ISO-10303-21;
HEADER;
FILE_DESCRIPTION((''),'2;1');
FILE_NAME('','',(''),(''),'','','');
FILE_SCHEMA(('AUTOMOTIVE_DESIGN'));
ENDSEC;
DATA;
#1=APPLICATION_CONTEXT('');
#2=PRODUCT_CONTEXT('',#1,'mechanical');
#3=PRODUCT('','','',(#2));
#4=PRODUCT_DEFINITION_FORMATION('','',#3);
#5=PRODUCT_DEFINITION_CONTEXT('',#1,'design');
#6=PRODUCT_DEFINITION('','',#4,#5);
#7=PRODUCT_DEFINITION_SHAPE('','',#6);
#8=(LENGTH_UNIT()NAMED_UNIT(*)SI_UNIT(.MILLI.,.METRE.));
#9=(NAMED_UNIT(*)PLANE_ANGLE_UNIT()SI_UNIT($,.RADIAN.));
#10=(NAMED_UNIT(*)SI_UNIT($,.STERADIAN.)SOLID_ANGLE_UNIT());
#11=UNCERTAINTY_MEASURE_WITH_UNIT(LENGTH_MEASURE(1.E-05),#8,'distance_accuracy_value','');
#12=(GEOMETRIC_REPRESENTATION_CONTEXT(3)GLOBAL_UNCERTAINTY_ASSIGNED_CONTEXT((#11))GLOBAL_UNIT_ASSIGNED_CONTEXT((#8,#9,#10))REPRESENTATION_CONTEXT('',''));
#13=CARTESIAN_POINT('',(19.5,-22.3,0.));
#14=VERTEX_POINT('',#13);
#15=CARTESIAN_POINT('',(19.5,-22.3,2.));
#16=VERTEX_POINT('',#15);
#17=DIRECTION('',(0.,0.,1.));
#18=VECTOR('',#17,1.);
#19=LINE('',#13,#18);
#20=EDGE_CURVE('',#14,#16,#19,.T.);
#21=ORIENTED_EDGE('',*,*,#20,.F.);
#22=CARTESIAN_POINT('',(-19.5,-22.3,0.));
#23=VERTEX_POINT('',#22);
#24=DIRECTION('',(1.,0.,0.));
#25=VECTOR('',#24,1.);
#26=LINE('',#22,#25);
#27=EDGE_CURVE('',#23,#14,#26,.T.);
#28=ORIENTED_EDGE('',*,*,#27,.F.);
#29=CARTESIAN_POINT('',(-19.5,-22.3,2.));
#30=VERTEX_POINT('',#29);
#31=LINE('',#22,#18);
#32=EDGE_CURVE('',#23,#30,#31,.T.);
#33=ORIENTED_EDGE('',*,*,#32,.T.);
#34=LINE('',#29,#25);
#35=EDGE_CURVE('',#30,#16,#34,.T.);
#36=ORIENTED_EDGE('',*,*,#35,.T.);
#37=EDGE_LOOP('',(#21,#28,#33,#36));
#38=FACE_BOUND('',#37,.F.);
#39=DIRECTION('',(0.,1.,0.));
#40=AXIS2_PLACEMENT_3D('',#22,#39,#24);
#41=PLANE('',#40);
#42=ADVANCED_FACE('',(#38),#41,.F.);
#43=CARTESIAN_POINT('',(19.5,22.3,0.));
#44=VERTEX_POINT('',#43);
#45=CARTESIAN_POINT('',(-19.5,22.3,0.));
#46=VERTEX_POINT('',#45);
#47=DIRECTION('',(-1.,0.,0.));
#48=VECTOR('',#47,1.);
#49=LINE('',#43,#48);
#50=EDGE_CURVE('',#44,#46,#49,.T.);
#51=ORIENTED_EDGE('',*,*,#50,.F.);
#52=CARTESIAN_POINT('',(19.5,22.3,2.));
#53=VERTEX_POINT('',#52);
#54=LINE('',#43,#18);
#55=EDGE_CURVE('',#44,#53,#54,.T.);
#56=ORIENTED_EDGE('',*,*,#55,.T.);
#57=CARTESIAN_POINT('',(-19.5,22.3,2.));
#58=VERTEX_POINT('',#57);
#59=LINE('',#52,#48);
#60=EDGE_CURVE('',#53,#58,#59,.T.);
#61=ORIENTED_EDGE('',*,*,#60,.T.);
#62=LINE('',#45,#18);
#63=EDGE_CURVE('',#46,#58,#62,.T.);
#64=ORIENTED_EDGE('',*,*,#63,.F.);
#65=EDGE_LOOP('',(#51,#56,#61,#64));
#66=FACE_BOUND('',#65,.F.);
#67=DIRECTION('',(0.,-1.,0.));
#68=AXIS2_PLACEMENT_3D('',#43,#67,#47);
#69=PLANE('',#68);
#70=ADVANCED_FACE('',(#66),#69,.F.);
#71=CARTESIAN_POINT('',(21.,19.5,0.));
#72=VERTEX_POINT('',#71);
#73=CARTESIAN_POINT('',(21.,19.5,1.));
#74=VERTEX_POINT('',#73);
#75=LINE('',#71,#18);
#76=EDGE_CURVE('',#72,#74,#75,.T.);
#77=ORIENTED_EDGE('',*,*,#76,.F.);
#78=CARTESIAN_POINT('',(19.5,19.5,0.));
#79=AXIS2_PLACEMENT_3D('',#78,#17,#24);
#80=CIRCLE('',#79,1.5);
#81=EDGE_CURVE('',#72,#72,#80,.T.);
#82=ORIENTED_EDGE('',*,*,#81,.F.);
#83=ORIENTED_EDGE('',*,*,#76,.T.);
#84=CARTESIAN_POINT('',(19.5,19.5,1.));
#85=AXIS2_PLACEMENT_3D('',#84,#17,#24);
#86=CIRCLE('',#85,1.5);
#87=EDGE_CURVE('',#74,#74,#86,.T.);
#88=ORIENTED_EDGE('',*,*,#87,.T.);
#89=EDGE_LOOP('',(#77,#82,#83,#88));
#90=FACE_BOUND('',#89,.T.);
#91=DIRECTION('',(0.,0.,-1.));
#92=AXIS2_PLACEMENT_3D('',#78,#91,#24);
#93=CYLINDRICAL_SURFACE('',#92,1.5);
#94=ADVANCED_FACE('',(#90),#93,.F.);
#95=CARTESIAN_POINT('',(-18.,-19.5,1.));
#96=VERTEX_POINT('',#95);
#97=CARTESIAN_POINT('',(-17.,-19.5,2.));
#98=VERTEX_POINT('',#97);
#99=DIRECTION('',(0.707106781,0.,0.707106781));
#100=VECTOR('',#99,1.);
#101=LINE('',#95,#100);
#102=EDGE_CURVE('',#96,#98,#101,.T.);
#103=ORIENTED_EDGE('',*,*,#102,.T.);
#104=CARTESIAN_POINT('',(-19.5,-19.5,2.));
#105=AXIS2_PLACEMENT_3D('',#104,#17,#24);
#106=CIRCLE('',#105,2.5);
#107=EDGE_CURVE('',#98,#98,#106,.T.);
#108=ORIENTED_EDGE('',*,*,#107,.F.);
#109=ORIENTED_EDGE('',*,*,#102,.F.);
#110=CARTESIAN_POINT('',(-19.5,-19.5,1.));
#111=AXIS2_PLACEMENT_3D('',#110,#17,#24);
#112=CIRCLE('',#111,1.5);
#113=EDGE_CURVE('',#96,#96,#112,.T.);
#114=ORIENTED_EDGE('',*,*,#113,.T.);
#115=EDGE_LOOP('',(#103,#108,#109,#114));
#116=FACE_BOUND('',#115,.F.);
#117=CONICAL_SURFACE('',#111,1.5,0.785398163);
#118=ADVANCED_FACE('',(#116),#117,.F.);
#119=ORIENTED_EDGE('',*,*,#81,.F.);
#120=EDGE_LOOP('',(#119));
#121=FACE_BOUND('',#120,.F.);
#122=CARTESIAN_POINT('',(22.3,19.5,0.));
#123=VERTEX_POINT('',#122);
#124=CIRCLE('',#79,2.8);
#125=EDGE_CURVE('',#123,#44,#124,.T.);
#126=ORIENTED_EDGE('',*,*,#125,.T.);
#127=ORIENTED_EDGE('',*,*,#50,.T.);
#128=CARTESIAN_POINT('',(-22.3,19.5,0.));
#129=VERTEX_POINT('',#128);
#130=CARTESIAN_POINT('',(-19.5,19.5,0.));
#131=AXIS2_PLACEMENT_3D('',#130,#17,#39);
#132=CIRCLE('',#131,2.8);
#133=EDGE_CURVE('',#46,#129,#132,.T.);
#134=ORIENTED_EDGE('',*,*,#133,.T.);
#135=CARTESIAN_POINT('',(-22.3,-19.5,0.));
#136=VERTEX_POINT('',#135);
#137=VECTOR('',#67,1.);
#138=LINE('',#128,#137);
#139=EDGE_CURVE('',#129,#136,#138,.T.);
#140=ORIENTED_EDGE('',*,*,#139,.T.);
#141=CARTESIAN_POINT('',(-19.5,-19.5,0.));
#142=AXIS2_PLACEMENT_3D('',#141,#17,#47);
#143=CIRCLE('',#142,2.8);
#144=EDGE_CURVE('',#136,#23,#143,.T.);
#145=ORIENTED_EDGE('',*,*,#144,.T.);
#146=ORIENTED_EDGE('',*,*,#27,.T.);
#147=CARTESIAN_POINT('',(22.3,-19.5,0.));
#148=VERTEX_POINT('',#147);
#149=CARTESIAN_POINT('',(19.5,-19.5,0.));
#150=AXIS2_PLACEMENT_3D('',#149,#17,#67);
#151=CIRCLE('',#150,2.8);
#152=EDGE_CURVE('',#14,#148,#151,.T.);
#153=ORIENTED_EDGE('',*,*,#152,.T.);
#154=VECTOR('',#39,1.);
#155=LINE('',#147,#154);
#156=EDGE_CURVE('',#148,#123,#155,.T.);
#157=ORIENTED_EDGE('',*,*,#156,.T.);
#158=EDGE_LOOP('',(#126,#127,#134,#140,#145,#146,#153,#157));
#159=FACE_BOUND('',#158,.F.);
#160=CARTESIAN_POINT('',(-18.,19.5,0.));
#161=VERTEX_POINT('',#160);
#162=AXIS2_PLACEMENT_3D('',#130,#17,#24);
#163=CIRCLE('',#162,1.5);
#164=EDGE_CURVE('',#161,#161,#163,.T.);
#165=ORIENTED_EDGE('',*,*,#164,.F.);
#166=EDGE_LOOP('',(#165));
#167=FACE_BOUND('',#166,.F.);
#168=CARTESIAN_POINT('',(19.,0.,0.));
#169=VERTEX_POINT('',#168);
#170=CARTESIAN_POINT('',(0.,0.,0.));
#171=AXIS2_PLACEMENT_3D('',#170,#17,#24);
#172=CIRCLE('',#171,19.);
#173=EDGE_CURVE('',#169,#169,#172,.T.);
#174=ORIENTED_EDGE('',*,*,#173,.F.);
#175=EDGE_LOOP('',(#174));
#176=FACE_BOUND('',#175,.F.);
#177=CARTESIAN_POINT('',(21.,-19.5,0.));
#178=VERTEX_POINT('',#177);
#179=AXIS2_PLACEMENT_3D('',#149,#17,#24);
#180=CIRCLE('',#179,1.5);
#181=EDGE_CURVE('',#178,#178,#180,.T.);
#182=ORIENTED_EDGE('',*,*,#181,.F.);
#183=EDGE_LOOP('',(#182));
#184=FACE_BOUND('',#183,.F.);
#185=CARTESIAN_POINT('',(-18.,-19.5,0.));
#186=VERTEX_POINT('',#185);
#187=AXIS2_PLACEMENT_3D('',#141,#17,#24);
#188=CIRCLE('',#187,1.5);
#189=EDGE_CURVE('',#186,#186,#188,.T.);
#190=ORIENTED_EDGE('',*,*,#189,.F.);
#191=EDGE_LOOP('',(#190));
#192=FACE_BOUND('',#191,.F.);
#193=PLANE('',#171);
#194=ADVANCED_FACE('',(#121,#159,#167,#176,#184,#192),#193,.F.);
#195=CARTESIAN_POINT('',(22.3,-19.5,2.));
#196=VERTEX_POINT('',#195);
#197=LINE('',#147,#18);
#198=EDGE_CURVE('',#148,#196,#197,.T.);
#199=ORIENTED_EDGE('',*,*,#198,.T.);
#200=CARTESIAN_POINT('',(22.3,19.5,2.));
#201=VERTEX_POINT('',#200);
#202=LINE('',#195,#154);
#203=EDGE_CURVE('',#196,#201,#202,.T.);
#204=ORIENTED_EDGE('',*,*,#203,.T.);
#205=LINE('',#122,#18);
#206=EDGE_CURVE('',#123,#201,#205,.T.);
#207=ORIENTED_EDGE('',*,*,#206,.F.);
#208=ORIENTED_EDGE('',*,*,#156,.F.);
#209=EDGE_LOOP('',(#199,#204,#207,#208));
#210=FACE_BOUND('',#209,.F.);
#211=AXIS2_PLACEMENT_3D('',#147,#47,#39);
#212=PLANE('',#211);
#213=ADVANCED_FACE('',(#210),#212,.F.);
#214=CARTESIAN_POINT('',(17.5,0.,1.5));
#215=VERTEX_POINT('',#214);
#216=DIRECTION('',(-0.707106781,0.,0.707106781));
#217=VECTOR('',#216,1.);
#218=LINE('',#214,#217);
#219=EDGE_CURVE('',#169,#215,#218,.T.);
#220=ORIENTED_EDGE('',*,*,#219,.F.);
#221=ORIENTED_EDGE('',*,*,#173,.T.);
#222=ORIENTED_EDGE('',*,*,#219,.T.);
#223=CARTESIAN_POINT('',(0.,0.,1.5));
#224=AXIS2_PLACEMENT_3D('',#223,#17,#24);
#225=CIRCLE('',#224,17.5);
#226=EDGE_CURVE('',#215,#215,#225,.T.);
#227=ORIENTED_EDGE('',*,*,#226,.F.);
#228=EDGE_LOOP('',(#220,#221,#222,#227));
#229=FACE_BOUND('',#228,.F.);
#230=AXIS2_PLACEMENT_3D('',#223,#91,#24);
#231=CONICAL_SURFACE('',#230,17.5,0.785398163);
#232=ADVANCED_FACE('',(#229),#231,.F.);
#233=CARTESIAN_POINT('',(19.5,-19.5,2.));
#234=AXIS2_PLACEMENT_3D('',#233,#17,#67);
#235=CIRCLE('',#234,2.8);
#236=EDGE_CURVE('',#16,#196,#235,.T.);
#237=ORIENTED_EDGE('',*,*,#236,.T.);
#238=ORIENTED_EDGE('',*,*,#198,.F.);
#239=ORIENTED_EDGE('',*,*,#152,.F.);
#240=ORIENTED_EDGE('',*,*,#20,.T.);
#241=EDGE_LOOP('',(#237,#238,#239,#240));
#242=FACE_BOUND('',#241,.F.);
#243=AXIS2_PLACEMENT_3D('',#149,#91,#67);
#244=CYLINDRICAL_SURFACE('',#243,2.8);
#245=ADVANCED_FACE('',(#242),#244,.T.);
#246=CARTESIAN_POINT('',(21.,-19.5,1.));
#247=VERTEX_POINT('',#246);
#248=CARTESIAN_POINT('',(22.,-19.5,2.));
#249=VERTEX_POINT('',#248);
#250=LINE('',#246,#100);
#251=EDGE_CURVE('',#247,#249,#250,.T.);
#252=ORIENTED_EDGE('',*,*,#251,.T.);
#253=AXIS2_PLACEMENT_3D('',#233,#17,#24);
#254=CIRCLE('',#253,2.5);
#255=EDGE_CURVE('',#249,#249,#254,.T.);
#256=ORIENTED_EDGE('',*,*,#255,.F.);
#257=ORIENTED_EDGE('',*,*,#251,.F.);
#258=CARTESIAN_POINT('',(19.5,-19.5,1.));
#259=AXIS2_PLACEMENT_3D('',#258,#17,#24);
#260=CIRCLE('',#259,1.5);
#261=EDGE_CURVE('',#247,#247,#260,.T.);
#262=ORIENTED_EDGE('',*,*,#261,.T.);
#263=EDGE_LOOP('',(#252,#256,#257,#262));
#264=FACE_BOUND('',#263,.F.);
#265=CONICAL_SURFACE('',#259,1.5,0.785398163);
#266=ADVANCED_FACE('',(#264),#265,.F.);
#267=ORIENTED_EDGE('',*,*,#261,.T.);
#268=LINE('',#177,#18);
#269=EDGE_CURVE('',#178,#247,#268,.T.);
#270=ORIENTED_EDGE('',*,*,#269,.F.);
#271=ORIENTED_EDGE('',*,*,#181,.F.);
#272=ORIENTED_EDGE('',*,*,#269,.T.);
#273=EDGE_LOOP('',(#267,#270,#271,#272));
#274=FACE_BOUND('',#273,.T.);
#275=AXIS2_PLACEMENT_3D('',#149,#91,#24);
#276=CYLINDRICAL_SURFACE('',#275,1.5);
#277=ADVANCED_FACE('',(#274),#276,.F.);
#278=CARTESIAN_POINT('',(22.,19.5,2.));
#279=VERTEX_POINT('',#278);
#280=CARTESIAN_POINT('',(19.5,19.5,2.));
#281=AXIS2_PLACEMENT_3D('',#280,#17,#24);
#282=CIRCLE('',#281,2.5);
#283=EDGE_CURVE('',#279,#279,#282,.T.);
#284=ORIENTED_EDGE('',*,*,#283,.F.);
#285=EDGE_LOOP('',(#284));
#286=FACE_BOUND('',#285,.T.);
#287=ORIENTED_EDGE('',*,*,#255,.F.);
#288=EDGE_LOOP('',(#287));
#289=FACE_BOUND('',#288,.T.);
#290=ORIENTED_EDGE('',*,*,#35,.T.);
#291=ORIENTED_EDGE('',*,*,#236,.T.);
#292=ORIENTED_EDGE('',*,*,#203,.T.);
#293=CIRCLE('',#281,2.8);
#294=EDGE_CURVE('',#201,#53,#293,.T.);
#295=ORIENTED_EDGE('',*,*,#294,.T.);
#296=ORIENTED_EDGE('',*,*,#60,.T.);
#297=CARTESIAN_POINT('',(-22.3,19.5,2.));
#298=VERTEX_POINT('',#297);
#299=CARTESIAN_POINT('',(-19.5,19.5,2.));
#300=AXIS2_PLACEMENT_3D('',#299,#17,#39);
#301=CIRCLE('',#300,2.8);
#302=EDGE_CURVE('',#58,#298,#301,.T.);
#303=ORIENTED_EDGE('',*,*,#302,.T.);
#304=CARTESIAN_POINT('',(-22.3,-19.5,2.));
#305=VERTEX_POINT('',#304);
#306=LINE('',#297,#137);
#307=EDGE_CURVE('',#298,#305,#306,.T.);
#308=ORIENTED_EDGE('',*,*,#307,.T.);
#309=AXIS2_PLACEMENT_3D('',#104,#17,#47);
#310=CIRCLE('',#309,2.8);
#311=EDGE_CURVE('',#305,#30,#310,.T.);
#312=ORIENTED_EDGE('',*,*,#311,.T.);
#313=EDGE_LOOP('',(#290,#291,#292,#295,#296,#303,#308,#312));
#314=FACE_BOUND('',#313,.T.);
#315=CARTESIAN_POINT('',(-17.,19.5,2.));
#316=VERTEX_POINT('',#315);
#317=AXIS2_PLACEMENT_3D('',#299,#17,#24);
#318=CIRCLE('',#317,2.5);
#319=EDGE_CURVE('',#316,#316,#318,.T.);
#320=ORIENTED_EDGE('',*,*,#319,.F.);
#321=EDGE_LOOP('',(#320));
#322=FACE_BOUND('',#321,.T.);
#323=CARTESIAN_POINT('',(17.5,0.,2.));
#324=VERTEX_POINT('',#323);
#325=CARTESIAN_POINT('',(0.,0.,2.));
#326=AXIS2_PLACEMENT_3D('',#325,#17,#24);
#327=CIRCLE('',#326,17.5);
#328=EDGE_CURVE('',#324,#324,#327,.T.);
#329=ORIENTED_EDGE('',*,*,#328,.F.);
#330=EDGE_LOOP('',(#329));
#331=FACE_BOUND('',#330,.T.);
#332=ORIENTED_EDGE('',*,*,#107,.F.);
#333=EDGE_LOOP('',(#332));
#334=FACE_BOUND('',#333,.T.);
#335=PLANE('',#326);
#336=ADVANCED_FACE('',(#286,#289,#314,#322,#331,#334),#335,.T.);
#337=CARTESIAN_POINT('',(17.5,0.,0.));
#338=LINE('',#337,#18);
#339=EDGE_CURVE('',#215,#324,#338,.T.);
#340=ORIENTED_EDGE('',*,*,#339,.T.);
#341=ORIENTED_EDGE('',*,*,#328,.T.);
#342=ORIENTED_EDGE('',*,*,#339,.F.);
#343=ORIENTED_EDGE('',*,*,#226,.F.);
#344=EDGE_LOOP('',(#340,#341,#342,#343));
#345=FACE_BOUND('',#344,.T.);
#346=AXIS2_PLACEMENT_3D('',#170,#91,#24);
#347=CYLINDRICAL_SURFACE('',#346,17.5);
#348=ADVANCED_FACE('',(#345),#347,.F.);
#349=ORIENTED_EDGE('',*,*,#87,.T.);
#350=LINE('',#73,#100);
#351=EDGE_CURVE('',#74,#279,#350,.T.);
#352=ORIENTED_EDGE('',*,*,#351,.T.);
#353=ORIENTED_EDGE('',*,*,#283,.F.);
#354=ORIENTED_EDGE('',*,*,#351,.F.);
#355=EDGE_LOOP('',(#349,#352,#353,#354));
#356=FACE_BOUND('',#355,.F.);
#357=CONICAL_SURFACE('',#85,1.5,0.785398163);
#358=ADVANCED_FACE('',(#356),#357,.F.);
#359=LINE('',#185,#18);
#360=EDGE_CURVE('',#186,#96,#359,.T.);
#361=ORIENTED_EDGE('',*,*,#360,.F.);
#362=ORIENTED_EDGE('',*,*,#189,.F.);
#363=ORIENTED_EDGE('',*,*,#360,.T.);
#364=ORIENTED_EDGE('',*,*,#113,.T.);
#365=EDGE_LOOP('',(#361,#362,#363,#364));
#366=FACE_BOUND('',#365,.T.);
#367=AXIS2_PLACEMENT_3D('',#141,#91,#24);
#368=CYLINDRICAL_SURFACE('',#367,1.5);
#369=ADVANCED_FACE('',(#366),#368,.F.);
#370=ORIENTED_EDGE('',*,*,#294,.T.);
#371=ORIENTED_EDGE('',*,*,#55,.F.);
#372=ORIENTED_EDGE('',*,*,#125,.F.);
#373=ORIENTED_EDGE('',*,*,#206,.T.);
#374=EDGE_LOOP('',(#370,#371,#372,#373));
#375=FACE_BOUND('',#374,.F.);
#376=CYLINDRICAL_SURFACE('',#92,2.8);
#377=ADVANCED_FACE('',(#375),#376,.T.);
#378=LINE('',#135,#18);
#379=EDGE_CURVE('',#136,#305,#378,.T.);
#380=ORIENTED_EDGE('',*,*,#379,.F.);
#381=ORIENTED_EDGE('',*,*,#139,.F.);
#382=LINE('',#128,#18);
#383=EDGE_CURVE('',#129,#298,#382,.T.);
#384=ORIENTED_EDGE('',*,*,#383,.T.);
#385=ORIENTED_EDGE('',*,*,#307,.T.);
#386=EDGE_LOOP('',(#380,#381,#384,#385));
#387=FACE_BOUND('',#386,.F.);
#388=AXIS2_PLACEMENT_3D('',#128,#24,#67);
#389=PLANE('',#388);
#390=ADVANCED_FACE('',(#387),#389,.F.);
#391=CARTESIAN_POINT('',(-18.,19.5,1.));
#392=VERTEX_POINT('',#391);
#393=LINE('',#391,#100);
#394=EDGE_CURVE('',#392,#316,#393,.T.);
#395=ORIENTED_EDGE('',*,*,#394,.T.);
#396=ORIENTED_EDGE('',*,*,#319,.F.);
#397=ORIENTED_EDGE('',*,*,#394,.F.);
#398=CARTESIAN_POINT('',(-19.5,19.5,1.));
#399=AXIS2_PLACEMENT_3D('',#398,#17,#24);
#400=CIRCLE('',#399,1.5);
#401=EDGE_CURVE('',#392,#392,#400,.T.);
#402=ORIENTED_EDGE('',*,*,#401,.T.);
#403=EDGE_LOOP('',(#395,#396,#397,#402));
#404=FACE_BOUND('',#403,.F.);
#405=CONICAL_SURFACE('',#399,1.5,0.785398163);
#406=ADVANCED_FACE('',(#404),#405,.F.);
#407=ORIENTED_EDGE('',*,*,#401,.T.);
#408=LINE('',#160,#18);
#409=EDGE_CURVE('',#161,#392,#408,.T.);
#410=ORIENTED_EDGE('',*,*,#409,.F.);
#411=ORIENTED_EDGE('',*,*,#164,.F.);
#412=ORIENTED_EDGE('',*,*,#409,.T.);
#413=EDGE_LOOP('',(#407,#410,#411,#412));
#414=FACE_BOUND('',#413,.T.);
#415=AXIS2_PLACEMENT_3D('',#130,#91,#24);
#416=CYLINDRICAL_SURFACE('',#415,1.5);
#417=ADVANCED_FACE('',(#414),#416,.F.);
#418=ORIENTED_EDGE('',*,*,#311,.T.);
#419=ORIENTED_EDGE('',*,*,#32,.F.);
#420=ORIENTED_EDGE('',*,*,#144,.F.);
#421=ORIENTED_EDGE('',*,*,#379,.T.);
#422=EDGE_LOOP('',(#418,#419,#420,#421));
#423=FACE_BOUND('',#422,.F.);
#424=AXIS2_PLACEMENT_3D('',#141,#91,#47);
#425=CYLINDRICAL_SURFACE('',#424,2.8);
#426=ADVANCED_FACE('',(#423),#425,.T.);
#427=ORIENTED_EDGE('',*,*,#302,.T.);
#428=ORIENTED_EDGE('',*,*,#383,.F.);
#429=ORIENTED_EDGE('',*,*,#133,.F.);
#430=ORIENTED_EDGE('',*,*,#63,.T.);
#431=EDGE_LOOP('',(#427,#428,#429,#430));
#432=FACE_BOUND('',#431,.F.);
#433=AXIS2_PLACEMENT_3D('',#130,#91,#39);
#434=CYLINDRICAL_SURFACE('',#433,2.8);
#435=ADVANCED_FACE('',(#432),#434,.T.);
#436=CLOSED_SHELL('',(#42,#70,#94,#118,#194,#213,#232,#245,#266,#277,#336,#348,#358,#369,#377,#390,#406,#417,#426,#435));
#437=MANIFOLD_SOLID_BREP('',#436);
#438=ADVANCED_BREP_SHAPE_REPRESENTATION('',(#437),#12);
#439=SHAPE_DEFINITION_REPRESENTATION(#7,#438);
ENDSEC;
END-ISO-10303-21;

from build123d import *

# Parameters (mm, degrees)
F0_R     = 1.5
F0_R_2   = 19
F0_R_3   = 17.5
F1_DEPTH = 2
F2_SIZE  = 1
F3_SIZE  = 1.5


with BuildPart() as f1:
    # F0 (on Top) → F1 (new body)
    with BuildSketch(Plane.XY):
        with BuildLine():
            Line((-22.3, 19.5), (-22.3, -19.5))
            ThreePointArc((-22.3, -19.5), (-21.4798989873, -21.4798989873), (-19.5, -22.3))
            Line((-19.5, -22.3), (19.5, -22.3))
            ThreePointArc((19.5, -22.3), (21.4798989873, -21.4798989873), (22.3, -19.5))
            Line((22.3, -19.5), (22.3, 19.5))
            ThreePointArc((22.3, 19.5), (21.4798989873, 21.4798989873), (19.5, 22.3))
            Line((19.5, 22.3), (-19.5, 22.3))
            ThreePointArc((-19.5, 22.3), (-21.4798989873, 21.4798989873), (-22.3, 19.5))
        make_face()
        with Locations((-19.5, -19.5)):
            Circle(F0_R, mode=Mode.SUBTRACT)
        with Locations((19.5, -19.5)):
            Circle(F0_R, mode=Mode.SUBTRACT)
        with Locations((-19.5, 19.5)):
            Circle(F0_R, mode=Mode.SUBTRACT)
        Circle(F0_R_2, mode=Mode.SUBTRACT)
        with Locations((19.5, 19.5)):
            Circle(F0_R, mode=Mode.SUBTRACT)
        Circle(F0_R_2)
        Circle(F0_R_3, mode=Mode.SUBTRACT)
    extrude(amount=F1_DEPTH)

    # F2
    f2_edges = [f1.edges().sort_by_distance(p)[0] for p in [
        (-21, 19.5, 2),
        (18, 19.5, 2),
        (18, -19.5, 2),
        (-21, -19.5, 2),
    ]]
    chamfer(f2_edges, length=F2_SIZE)

    # F3
    f3_edges = [f1.edges().sort_by_distance(p)[0] for p in [
        (-17.5, 0, 0),
    ]]
    chamfer(f3_edges, length=F3_SIZE)


solid = f1.part
